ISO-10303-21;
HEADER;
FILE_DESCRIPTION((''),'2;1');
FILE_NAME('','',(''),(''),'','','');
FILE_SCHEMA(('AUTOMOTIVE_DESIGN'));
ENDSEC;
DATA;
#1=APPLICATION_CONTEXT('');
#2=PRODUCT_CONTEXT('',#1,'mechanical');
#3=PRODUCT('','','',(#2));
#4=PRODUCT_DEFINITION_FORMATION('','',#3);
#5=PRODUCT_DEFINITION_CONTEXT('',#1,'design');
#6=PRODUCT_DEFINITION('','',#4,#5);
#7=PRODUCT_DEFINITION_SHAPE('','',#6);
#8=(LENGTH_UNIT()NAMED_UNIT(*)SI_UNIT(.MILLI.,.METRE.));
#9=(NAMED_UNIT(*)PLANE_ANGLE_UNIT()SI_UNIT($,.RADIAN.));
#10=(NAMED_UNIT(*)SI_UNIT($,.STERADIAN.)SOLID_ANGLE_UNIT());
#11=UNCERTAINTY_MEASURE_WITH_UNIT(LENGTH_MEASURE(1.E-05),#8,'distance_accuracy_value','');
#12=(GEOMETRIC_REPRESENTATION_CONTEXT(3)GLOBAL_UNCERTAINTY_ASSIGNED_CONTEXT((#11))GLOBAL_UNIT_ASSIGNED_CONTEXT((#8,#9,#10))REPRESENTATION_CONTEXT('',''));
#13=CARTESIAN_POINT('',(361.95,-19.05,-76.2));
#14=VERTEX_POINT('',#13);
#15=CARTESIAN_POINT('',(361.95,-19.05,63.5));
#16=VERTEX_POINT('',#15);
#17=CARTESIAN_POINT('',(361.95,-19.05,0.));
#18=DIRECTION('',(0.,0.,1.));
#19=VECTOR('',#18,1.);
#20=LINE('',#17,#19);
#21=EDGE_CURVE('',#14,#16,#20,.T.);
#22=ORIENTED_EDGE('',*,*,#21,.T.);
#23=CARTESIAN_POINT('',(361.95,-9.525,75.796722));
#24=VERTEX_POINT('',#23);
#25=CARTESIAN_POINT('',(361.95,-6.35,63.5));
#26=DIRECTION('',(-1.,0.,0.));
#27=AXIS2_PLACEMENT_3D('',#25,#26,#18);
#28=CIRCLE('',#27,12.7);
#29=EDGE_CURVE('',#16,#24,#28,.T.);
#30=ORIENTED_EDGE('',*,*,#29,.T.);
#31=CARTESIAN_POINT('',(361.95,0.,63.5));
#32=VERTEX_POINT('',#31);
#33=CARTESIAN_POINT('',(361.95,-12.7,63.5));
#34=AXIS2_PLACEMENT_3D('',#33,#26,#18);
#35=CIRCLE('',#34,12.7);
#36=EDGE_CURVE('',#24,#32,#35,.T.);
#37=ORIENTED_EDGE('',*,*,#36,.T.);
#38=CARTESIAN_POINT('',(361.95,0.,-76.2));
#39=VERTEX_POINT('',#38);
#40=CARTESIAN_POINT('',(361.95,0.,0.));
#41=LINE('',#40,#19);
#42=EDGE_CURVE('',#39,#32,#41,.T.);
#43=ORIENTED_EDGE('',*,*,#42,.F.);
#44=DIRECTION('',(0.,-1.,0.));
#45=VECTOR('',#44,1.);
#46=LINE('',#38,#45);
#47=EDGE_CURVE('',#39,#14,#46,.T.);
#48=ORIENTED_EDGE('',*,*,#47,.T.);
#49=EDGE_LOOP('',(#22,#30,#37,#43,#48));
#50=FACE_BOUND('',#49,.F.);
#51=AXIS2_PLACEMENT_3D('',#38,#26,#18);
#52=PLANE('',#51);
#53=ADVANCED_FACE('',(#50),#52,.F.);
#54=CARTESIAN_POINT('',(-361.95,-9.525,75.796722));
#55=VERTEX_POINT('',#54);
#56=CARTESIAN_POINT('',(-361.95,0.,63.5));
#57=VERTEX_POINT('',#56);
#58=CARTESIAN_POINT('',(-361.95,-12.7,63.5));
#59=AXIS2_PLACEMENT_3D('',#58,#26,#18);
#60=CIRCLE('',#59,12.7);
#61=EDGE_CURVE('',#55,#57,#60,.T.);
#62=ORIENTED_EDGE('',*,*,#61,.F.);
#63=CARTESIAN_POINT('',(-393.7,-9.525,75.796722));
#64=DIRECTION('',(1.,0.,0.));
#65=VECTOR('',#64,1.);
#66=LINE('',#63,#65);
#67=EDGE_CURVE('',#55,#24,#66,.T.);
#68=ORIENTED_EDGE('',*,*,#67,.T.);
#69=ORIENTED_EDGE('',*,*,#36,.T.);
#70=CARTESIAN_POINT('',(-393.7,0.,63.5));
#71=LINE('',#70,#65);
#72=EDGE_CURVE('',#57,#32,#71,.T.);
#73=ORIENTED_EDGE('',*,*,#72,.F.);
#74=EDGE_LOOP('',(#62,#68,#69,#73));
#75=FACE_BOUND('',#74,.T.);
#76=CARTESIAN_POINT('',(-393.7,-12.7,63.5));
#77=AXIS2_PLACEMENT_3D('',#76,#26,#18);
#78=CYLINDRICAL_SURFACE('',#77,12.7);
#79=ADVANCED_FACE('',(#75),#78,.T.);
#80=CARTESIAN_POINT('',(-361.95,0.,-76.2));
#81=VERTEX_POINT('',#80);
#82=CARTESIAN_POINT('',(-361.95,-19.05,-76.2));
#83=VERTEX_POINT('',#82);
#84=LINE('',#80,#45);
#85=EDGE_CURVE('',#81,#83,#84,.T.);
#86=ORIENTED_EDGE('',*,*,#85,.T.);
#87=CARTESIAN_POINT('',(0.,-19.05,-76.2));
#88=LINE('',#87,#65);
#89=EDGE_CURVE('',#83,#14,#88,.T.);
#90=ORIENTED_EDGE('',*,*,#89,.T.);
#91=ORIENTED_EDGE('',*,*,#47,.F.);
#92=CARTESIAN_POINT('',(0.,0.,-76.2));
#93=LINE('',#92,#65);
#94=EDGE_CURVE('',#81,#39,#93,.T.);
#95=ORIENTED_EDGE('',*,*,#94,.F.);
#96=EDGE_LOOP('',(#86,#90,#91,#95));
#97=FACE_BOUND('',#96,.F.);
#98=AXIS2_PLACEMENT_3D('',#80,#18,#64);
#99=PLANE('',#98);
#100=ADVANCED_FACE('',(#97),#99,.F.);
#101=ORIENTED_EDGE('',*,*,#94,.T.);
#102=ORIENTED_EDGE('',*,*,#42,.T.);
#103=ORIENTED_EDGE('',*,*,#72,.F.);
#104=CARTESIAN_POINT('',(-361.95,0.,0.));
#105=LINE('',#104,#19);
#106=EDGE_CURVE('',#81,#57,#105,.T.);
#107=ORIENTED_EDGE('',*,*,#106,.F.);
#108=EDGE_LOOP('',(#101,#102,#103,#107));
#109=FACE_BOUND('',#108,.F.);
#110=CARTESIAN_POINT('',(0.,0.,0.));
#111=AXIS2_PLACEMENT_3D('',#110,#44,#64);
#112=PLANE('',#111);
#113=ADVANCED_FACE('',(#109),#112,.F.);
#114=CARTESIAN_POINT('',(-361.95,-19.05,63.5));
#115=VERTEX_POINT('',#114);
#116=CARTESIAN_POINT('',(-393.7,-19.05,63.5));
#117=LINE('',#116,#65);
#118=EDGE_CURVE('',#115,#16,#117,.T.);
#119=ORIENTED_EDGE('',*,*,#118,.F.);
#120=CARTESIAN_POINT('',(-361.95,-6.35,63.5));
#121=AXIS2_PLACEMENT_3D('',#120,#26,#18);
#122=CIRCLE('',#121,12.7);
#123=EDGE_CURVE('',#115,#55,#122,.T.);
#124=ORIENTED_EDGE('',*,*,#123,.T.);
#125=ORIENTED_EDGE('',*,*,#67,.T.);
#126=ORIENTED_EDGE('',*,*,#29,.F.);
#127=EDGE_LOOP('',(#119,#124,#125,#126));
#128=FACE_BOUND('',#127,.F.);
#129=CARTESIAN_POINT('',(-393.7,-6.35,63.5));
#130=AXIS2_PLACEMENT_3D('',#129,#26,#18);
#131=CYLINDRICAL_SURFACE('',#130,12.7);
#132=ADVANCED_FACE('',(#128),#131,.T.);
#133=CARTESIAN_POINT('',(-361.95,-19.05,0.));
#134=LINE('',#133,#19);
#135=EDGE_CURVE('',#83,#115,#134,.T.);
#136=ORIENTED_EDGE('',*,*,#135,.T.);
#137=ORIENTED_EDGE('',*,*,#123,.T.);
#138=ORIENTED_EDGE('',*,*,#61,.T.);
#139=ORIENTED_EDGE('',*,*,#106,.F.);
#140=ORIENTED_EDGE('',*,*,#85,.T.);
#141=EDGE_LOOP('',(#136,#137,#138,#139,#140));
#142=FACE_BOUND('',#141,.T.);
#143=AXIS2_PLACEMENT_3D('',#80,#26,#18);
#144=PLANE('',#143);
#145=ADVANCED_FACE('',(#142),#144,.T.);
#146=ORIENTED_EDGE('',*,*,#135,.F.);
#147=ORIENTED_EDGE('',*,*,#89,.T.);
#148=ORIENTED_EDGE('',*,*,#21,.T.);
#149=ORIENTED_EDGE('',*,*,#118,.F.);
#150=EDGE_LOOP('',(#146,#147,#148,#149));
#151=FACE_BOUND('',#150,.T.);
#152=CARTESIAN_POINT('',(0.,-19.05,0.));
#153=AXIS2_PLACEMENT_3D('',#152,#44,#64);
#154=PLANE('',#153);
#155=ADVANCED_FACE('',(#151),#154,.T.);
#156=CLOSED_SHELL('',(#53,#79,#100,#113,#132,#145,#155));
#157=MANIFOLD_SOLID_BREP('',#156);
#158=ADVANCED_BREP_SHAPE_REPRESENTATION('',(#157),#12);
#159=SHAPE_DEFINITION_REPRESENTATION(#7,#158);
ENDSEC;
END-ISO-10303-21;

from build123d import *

# Parameters (mm, degrees)
F0_W        = 723.9
F0_H        = 152.4
F1_DEPTH    = 19.05
F2_T1_DEPTH = 787.4


# Not quite as in the source:
# - a fillet or chamfer that OpenCascade refuses, or shapes differently, is made with other operations: its cross-section is extruded or revolved along the edge and cut away or added


with BuildPart() as f1:
    # F0 (on Front) → F1 (new body)
    with BuildSketch(Plane.XZ):
        Rectangle(F0_W, F0_H)
    extrude(amount=F1_DEPTH)

    # F2: fillet of radius 12.7 on 2 edges, made by hand

    # F2_s2 → F2_t1 (cut)
    with BuildSketch(Plane.YZ.offset(-393.7)):
        with BuildLine():
            ThreePointArc((-12.7, 76.2), (-3.7197438789, 72.4802561211), (0, 63.5))
            Line((0, 63.5), (0, 76.2))
            Line((0, 76.2), (-12.7, 76.2))
        make_face()
        with BuildLine():
            ThreePointArc((-6.35, 76.2), (-15.3302561211, 72.4802561211), (-19.05, 63.5))
            Line((-19.05, 63.5), (-19.05, 76.2))
            Line((-19.05, 76.2), (-6.35, 76.2))
        make_face()
    extrude(amount=F2_T1_DEPTH, mode=Mode.SUBTRACT)


solid = f1.part
